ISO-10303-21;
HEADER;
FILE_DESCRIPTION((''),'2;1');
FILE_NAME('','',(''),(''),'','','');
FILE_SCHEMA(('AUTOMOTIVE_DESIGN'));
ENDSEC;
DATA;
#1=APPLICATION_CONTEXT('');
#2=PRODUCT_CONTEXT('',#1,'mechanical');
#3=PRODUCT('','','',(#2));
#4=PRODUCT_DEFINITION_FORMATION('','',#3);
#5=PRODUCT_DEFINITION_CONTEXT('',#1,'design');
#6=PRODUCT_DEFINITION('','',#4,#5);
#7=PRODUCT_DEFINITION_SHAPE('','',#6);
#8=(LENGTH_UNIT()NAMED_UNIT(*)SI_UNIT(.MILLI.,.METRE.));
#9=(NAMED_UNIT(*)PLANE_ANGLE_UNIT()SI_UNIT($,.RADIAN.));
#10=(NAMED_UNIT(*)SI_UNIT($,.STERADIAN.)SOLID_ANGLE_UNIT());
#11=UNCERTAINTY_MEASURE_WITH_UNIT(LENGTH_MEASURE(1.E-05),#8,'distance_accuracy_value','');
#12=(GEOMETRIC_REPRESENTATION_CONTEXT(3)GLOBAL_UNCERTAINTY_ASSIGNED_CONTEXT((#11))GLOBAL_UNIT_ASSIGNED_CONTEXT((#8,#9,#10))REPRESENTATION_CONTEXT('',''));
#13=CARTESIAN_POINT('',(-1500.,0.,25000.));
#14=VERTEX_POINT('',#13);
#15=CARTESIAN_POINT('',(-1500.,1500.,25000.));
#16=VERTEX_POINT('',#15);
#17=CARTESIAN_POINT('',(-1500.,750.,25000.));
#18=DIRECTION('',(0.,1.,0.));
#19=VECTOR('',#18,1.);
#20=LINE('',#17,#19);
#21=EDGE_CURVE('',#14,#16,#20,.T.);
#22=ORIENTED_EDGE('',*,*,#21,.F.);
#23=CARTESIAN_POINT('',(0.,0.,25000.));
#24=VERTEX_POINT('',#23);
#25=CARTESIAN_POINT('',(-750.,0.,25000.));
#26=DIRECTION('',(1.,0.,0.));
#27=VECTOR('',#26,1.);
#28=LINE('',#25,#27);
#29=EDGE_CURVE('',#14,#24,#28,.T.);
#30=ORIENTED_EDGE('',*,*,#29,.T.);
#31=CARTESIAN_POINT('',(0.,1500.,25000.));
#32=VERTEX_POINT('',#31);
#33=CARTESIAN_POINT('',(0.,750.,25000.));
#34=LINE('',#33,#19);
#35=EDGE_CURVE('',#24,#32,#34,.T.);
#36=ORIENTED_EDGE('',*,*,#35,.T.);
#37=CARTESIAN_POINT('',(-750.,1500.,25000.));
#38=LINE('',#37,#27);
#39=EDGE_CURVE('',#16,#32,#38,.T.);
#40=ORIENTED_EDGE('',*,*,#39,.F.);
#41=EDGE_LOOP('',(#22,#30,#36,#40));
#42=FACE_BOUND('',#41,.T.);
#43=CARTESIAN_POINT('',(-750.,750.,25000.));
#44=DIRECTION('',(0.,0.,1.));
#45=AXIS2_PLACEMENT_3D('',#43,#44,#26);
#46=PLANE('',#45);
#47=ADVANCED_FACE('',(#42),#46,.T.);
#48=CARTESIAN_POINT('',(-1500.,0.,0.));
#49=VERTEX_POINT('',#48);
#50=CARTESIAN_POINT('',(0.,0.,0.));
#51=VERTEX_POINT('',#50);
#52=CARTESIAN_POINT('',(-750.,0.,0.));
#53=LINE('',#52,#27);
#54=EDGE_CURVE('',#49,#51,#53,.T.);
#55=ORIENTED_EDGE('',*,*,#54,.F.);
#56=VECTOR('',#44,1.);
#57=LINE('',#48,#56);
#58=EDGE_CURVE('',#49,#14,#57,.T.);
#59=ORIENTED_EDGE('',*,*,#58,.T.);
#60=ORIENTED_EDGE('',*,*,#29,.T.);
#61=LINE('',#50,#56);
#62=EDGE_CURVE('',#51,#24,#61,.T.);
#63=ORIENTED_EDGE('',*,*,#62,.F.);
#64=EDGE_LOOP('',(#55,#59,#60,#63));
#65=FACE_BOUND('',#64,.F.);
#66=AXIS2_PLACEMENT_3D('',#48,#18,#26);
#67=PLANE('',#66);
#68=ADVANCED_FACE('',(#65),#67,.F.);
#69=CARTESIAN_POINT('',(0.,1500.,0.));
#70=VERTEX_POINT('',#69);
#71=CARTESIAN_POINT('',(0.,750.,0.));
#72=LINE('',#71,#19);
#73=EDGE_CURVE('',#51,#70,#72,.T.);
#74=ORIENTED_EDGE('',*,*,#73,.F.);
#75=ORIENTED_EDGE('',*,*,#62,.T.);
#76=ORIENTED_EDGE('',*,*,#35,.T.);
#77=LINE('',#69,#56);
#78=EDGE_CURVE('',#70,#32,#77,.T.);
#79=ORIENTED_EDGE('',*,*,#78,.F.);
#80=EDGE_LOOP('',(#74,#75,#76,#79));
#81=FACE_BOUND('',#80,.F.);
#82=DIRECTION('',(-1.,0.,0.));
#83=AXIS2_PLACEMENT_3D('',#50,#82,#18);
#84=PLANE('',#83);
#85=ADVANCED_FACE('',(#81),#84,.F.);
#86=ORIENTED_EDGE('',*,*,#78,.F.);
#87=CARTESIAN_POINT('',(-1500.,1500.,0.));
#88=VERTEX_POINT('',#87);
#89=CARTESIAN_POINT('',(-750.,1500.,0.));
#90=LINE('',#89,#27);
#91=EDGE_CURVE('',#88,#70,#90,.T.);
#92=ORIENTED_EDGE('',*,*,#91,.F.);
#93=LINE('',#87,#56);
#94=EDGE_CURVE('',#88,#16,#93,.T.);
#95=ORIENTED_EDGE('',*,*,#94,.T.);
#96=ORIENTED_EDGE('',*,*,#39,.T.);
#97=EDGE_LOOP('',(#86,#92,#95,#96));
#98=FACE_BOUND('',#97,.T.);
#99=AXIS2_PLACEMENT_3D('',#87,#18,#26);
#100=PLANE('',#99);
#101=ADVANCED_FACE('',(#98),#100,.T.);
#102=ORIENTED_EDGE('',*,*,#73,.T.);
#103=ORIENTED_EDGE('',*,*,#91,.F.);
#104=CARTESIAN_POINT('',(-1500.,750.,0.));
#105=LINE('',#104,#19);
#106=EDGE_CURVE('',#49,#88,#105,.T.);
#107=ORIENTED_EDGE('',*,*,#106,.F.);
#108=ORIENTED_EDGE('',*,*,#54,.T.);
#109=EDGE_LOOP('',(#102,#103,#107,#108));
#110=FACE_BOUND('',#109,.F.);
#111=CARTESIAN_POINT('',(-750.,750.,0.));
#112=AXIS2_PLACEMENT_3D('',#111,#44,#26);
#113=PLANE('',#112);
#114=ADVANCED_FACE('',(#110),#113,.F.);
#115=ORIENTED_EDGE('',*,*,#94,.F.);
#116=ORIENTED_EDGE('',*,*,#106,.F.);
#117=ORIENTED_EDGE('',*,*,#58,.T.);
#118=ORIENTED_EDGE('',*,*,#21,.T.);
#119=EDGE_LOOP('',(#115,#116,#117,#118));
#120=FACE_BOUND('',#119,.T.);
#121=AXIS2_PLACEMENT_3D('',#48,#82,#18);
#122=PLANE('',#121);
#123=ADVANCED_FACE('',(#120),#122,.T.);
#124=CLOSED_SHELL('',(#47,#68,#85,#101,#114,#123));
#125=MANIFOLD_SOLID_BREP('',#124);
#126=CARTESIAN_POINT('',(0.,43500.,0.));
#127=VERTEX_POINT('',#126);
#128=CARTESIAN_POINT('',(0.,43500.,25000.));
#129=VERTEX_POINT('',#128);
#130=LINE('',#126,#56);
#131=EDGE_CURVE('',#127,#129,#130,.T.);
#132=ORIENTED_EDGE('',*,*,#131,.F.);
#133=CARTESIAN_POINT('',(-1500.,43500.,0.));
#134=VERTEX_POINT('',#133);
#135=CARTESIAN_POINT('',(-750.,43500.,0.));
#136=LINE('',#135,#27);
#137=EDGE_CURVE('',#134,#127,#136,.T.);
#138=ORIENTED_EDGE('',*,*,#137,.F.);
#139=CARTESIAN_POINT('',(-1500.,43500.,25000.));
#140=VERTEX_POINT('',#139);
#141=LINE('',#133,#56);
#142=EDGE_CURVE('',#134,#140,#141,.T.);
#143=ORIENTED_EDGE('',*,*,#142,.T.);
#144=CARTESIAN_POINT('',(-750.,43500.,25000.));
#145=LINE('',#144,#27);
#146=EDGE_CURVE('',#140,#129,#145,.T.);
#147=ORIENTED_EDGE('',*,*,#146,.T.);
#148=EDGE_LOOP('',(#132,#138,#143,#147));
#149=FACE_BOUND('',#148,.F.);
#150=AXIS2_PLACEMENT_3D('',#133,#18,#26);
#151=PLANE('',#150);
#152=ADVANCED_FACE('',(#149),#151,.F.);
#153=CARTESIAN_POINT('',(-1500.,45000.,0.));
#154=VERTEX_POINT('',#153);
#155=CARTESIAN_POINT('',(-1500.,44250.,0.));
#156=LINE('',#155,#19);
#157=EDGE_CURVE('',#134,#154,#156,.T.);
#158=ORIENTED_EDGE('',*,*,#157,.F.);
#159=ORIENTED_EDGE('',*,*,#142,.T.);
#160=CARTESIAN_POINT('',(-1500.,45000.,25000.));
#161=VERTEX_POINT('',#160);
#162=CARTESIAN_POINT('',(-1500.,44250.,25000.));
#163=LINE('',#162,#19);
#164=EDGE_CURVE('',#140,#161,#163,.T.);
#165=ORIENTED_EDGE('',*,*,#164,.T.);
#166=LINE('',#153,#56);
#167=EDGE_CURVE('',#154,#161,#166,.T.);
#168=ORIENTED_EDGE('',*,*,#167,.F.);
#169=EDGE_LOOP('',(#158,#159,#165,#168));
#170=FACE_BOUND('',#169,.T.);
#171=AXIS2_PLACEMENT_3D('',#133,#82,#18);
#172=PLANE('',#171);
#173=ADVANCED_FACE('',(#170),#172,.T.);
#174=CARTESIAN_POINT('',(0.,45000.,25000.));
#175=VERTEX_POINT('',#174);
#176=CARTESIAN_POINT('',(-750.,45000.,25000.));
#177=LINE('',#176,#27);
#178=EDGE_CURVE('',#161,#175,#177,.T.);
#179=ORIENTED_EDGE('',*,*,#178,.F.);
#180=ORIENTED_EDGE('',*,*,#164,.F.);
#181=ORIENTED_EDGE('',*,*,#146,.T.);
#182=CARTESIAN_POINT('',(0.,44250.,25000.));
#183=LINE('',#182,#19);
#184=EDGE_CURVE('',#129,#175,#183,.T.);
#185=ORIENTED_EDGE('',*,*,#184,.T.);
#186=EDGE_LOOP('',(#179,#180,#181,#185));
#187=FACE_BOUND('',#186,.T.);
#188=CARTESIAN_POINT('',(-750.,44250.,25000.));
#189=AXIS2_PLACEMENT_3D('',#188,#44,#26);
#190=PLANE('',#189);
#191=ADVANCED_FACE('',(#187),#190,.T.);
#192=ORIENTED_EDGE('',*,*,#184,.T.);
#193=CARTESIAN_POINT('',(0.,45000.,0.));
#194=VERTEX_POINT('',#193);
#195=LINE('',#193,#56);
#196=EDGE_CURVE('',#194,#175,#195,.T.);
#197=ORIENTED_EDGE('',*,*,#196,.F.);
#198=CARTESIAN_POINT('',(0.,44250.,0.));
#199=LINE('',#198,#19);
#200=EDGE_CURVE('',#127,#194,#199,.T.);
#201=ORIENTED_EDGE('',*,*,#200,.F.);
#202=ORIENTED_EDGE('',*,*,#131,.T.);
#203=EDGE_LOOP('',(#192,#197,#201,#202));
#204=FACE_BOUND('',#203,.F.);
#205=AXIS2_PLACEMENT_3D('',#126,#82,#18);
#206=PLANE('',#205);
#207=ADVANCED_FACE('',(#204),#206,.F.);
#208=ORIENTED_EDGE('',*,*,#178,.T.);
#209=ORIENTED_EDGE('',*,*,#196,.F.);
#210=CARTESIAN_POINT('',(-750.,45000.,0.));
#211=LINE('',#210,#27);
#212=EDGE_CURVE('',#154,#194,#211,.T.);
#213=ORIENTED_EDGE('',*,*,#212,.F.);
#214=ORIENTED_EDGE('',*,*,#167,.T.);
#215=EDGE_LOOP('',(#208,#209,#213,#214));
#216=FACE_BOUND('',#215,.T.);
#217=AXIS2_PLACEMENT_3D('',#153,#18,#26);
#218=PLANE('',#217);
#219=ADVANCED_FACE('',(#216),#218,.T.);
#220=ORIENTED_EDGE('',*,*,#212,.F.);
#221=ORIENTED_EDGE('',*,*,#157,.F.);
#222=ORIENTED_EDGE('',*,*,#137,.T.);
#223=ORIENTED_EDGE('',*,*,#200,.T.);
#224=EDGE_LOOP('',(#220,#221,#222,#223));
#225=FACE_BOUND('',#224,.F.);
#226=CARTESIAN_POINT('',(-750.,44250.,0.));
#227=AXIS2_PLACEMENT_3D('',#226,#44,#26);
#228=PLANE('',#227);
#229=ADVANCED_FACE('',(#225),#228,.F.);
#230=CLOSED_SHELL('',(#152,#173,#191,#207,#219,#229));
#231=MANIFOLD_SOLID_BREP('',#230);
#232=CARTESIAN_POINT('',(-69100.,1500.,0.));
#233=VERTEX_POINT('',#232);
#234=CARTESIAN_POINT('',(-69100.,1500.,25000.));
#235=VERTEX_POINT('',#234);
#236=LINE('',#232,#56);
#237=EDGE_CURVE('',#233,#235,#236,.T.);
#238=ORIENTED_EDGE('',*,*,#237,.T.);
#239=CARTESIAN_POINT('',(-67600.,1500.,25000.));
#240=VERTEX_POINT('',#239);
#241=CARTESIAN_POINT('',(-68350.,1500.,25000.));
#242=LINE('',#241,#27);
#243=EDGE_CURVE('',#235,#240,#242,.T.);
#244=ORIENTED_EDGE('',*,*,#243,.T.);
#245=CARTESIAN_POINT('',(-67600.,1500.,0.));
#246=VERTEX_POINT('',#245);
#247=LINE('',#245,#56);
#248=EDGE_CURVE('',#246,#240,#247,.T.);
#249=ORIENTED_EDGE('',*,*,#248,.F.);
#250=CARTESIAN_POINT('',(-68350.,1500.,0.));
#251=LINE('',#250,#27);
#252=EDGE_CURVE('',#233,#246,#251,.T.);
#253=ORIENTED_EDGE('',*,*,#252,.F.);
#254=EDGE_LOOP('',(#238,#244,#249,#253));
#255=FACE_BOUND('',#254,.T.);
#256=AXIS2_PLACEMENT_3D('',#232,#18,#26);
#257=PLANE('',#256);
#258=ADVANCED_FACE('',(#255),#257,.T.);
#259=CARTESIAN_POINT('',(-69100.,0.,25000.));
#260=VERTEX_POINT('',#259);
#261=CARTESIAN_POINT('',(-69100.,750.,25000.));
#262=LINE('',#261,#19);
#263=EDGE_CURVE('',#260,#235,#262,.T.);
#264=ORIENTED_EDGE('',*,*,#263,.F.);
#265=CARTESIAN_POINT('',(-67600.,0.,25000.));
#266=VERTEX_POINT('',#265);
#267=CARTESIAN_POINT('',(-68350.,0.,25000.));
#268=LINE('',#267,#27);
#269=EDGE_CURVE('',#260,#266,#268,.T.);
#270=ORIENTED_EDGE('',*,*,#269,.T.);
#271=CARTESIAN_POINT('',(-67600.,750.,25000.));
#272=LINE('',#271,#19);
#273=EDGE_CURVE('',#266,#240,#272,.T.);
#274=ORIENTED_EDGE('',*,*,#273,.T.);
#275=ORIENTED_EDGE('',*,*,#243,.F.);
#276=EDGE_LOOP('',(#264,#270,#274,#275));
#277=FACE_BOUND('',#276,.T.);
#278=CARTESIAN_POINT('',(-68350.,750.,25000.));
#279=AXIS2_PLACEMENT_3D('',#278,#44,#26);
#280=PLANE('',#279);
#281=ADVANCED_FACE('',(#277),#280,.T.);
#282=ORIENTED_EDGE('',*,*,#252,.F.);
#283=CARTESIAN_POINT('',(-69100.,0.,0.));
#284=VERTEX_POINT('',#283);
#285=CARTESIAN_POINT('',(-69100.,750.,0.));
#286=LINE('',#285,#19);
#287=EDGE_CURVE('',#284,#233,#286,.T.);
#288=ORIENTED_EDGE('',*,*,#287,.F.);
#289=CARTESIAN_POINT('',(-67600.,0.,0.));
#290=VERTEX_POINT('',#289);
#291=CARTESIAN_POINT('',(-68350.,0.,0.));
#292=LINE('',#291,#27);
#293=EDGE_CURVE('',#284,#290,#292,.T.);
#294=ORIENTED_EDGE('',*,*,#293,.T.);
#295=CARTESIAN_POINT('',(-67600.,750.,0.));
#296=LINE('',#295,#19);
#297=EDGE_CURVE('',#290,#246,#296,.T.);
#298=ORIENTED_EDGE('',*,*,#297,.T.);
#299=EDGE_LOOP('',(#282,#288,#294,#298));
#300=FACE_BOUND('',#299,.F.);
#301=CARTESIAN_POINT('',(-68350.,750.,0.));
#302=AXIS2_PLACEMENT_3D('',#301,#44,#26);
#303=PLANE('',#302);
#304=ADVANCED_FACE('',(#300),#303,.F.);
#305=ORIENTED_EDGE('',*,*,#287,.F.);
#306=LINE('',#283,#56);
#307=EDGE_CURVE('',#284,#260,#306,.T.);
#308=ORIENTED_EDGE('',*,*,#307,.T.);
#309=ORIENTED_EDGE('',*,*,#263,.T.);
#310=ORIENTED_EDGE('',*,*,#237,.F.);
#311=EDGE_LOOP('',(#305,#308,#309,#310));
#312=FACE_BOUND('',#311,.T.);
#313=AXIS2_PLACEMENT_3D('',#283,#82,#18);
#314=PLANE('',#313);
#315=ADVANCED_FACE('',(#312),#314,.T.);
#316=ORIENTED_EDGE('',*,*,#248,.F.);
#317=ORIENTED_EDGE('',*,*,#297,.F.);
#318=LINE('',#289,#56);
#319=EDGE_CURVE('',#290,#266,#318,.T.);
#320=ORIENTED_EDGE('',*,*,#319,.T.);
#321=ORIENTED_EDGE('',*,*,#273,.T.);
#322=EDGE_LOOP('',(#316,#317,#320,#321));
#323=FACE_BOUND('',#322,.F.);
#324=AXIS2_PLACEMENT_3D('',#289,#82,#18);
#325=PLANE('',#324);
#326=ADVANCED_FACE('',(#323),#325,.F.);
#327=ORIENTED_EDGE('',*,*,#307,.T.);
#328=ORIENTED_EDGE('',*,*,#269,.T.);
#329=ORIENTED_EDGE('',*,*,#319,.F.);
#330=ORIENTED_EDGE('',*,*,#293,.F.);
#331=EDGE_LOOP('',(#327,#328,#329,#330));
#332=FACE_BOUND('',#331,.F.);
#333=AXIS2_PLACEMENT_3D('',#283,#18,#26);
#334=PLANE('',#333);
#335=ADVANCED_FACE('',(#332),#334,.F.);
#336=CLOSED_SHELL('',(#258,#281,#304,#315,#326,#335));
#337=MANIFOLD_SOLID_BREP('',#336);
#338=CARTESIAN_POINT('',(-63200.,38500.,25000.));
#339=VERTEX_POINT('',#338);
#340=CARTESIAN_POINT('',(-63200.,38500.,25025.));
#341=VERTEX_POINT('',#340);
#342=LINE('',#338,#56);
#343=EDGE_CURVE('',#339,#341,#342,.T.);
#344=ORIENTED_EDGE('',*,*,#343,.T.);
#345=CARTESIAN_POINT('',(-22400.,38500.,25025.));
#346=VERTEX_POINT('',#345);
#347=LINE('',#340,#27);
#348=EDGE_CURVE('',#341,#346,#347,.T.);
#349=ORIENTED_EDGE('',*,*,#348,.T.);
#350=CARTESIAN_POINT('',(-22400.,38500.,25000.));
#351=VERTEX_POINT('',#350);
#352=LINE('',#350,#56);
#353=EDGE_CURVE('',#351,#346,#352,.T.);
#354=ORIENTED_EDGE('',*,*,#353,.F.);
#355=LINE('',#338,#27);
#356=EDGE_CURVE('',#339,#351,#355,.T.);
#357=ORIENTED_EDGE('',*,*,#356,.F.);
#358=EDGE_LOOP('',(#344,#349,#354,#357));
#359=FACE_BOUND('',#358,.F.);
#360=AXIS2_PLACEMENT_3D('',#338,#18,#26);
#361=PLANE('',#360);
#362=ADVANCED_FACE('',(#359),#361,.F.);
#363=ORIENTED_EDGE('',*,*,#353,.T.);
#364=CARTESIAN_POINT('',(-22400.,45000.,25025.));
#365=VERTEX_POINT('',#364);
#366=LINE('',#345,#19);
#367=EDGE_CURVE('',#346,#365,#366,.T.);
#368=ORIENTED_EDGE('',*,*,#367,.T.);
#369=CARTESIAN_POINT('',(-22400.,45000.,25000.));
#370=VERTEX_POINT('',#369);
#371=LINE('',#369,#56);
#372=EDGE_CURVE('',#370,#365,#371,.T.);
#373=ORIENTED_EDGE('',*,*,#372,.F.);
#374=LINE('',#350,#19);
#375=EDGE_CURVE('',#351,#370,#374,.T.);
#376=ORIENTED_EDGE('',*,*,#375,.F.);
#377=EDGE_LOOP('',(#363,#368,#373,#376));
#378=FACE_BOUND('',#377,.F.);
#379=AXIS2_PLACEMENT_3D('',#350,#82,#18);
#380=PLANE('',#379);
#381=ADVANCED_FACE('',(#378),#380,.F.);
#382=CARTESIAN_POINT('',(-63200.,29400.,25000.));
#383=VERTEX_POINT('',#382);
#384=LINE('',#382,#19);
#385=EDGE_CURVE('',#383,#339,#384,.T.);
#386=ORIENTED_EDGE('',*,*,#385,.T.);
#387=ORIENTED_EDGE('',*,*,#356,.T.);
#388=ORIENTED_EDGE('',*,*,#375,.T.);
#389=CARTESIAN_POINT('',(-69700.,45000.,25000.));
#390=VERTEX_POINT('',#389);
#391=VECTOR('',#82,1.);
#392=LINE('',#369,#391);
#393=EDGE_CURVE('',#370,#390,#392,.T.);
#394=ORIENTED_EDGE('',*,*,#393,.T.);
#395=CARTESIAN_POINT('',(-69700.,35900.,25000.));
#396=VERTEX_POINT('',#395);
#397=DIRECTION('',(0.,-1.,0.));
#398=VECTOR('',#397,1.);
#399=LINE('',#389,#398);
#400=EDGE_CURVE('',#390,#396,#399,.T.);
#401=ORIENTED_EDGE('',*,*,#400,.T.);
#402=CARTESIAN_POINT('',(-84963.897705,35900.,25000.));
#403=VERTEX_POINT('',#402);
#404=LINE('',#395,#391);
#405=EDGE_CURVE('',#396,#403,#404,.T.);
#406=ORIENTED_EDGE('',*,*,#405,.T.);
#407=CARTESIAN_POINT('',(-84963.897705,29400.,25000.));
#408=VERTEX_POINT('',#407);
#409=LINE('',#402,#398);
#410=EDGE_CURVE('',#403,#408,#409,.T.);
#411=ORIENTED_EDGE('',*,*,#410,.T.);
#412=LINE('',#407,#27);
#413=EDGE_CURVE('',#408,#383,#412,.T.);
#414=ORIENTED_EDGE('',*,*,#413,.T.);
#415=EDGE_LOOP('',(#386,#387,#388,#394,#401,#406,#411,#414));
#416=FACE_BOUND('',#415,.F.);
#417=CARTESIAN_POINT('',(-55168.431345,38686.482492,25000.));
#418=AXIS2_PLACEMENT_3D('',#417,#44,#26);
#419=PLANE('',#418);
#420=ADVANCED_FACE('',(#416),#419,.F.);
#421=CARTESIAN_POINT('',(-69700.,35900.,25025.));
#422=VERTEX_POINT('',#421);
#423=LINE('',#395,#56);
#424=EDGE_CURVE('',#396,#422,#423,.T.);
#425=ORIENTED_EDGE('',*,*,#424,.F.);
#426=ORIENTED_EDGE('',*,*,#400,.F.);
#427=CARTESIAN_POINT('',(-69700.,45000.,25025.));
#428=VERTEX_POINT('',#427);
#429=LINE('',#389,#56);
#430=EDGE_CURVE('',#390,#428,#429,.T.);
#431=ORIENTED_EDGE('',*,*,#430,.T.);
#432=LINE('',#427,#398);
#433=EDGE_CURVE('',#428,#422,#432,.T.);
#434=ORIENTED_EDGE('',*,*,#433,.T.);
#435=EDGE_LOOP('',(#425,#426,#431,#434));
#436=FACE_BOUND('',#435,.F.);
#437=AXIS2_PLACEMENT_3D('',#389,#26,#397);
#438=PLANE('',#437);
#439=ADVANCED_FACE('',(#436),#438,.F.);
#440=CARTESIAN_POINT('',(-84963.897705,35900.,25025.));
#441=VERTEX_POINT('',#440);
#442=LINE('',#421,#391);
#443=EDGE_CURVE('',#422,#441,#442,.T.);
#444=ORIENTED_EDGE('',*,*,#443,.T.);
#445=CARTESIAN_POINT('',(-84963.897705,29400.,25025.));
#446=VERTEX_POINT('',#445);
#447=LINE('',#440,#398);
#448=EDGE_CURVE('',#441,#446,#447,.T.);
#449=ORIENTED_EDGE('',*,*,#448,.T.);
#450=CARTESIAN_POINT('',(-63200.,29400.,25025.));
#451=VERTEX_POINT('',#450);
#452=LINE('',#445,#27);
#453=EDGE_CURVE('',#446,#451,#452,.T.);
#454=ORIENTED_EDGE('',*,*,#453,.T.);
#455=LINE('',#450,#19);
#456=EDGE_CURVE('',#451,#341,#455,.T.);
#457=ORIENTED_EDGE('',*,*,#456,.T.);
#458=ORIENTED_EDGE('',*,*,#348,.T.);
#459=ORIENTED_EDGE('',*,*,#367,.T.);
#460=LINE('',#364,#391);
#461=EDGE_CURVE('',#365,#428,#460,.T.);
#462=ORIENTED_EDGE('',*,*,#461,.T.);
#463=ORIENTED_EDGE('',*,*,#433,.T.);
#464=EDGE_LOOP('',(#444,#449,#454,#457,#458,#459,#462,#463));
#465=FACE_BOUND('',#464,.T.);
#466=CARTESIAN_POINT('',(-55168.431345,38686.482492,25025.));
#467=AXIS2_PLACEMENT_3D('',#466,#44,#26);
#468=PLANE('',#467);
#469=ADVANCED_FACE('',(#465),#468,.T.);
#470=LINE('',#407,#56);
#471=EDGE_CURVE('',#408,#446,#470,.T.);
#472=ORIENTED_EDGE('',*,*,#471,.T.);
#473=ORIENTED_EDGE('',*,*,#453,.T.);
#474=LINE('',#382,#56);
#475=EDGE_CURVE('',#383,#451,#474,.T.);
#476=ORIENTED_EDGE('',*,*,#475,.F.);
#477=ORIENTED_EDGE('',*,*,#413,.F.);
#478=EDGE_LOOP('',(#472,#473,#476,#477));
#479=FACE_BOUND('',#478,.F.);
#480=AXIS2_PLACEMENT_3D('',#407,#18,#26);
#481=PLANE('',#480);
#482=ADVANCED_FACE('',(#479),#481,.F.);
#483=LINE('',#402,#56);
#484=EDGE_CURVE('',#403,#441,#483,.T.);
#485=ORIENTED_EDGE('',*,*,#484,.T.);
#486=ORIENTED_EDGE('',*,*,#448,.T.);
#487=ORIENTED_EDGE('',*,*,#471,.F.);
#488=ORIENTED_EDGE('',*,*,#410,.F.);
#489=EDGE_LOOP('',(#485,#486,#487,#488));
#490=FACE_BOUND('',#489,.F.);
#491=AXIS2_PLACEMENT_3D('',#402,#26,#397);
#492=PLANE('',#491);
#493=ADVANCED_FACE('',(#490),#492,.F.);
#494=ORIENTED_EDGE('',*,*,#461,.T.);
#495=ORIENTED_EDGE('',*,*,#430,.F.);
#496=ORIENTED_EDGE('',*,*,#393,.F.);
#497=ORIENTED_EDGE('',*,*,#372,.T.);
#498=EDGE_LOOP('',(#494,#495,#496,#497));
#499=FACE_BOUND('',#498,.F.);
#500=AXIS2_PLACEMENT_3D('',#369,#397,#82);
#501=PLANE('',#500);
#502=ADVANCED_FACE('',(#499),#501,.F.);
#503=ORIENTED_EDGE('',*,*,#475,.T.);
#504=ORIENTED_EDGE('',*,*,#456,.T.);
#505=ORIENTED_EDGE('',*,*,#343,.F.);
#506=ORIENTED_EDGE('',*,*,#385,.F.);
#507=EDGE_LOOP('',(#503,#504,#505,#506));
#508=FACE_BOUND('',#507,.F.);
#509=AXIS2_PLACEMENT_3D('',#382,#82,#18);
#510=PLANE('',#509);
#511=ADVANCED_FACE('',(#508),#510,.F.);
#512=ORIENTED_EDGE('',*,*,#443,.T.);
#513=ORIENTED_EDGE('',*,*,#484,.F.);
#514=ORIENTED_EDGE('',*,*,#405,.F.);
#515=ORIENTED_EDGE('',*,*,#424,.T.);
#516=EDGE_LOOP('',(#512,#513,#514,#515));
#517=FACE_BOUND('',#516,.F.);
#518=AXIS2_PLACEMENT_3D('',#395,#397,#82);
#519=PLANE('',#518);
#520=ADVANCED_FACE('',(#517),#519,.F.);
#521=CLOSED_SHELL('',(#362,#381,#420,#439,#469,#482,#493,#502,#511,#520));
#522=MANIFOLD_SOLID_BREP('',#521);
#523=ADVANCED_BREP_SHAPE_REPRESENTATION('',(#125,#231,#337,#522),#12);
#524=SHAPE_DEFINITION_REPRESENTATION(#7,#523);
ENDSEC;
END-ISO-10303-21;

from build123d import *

# Parameters (mm, degrees)
F4_DEPTH  = 25
F7_W      = 1500
F7_H      = 1500
F11_DEPTH = 25000


# Not quite as in the source:
# - the program builds the solid bodies; features that only make, move or delete a surface that nothing else refers to are left out


with BuildPart() as f4:
    # F3 (on offset) → F4 (new body)
    with BuildSketch(Plane.XY.offset(25000)):
        Polygon((-84963.8977050781, 35900), (-84963.8977050781, 29400), (-63200, 29400), (-63200, 38500), (-22400, 38500), (-22400, 45000), (-69700, 45000), (-69700, 35900), align=None)
    extrude(amount=F4_DEPTH)


with BuildPart() as f11:
    # F7 (on Top) → F11 (new body)
    with BuildSketch(Plane.XY):
        with Locations((-750, 44250)):
            Rectangle(F7_W, F7_H)
    extrude(amount=F11_DEPTH)


with BuildPart() as f11b:
    # F7 (on Top) → F11, piece 2 (new body)
    with BuildSketch(Plane.XY):
        with Locations((-750, 750)):
            Rectangle(F7_W, F7_H)
    extrude(amount=F11_DEPTH)


with BuildPart() as f11c:
    # F7 (on Top) → F11, piece 3 (new body)
    with BuildSketch(Plane.XY):
        with Locations((-68350, 750)):
            Rectangle(F7_W, F7_H)
    extrude(amount=F11_DEPTH)


solid = Compound([f4.part, f11.part, f11b.part, f11c.part])
